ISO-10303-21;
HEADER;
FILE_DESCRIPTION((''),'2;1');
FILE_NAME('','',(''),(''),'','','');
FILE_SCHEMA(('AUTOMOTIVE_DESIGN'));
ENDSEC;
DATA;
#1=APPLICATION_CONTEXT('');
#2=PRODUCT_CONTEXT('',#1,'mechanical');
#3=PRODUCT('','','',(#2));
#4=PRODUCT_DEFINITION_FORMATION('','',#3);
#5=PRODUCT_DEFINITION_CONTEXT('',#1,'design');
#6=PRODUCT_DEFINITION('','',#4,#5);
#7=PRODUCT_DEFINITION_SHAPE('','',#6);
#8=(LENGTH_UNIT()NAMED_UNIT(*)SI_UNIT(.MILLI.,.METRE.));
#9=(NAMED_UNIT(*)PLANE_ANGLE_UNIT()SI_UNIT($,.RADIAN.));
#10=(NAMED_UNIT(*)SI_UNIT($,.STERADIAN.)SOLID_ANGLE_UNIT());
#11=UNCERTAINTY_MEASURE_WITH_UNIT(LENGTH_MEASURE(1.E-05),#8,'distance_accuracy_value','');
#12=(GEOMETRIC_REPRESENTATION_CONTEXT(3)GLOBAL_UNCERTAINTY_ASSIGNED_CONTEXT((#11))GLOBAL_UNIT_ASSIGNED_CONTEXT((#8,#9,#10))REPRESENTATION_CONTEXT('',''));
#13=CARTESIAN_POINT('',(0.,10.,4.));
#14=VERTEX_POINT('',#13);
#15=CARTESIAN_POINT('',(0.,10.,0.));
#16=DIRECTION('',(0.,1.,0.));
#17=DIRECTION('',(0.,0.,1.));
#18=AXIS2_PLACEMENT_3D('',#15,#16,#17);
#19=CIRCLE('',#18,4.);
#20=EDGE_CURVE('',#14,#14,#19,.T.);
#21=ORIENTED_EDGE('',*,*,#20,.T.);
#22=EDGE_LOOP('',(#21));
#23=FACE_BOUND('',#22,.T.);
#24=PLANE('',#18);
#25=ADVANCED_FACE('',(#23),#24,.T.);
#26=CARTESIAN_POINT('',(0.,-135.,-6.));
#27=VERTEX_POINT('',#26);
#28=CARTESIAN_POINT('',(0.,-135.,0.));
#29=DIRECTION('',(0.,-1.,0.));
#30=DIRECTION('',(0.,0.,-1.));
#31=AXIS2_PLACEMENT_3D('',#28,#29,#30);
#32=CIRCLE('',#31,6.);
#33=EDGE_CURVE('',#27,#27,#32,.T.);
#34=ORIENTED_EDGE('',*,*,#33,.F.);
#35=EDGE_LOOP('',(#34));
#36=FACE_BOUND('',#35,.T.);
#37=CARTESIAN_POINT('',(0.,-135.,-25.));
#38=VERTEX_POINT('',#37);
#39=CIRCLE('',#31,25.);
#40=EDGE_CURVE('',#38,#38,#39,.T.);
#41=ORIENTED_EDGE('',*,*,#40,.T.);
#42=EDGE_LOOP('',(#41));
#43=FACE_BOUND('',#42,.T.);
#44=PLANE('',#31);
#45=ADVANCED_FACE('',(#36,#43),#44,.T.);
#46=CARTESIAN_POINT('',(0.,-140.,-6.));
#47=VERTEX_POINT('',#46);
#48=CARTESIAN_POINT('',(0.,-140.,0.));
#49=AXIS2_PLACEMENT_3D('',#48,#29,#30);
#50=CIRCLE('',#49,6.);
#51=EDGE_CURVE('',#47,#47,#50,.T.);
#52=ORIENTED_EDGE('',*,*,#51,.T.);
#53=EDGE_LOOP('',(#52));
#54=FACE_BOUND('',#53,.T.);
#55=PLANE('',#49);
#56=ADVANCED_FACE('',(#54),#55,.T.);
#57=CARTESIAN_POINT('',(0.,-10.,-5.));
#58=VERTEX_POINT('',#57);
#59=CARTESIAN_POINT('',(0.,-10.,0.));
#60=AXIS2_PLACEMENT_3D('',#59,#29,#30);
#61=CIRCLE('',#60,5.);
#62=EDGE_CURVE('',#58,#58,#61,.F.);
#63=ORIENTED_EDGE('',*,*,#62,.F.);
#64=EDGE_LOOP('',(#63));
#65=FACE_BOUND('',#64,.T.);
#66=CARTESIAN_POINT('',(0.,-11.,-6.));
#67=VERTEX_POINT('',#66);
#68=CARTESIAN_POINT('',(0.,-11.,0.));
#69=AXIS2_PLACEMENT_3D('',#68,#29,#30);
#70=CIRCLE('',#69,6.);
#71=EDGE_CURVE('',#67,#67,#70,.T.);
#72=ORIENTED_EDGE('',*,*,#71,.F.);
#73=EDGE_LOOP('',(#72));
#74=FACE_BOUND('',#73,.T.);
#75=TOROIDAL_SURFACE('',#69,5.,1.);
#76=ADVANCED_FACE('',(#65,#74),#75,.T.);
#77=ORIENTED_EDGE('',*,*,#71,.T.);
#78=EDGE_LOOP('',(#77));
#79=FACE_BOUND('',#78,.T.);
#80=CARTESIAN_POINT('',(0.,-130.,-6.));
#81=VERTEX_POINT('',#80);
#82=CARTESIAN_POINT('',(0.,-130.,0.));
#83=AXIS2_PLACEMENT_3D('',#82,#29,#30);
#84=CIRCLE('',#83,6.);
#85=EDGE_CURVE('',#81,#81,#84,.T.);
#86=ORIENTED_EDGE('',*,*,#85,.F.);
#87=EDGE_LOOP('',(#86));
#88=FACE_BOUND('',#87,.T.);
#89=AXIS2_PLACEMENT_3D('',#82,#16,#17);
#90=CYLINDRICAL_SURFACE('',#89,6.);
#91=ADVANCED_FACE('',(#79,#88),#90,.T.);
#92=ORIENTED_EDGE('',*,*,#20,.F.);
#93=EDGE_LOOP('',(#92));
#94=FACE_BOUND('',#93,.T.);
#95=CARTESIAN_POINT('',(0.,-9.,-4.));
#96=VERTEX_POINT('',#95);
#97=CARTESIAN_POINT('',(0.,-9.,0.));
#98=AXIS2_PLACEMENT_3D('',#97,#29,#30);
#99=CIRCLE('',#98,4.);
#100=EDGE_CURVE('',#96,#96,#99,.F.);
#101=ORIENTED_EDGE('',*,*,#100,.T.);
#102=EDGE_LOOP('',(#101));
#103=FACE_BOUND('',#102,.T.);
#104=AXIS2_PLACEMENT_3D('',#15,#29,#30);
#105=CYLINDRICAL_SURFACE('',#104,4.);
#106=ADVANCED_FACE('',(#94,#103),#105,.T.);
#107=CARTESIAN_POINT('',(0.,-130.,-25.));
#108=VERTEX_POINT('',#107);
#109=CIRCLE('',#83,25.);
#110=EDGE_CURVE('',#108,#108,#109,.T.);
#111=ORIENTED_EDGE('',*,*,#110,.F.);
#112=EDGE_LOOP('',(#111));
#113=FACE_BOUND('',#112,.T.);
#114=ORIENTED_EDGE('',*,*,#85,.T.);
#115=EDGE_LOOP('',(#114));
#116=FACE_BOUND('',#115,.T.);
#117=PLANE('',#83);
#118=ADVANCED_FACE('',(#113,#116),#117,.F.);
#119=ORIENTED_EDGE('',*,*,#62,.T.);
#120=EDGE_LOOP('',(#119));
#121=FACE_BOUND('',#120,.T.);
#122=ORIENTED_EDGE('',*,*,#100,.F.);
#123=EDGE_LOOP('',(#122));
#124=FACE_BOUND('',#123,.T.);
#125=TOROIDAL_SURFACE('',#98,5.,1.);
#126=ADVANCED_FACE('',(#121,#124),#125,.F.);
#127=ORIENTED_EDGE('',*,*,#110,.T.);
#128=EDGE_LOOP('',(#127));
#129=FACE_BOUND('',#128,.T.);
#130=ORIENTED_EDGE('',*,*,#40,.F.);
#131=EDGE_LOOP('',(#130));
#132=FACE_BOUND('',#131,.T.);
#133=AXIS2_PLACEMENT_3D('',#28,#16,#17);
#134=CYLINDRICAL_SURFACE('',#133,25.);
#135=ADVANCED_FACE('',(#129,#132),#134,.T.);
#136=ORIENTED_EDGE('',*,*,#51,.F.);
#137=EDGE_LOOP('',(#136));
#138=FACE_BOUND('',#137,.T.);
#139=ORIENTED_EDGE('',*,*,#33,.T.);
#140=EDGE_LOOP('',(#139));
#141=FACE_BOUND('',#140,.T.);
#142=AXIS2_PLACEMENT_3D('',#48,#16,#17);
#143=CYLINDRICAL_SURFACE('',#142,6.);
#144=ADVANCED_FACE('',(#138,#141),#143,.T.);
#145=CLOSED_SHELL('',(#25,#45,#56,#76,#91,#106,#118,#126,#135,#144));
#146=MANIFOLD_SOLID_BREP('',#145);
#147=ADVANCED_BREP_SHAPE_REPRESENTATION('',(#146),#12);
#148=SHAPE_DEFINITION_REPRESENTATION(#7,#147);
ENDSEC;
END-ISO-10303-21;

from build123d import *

# Parameters (mm, degrees)
SKETCH1_R           = 4
BOSS_EXTRUDE1_DEPTH = 10
SKETCH2_R           = 6
BOSS_EXTRUDE2_DEPTH = 120
SKETCH3_R           = 25
BOSS_EXTRUDE3_DEPTH = 5
SKETCH4_R           = 6
BOSS_EXTRUDE4_DEPTH = 5
FILLET2_R           = 1


with BuildPart() as part:
    # Sketch1 → Boss-Extrude1 (new, symmetric)
    with BuildSketch(Plane(origin=(0, 0, 0), x_dir=(1, 0, 0), z_dir=(0, 1, 0))):
        with Locations(Location((0, 0, 0), (0, 0, 270))):
            Circle(SKETCH1_R)
    extrude(amount=BOSS_EXTRUDE1_DEPTH, both=True)

    # Sketch2 → Boss-Extrude2 (add)
    with BuildSketch(Plane.XZ.offset(10)):
        with Locations(Location((0, 0, 0), (0, 0, 270))):
            Circle(SKETCH2_R)
    extrude(amount=BOSS_EXTRUDE2_DEPTH)

    # Sketch3 → Boss-Extrude3 (add)
    with BuildSketch(Plane.XZ.offset(130)):
        with Locations(Location((0, 0, 0), (0, 0, 270))):
            Circle(SKETCH3_R)
    extrude(amount=BOSS_EXTRUDE3_DEPTH)

    # Sketch4 → Boss-Extrude4 (add)
    with BuildSketch(Plane.XZ.offset(135)):
        with Locations(Location((0, 0, 0), (0, 0, 270))):
            Circle(SKETCH4_R)
    extrude(amount=BOSS_EXTRUDE4_DEPTH)

    # Fillet2
    fillet2_edges = [part.edges().sort_by_distance(p)[0] for p in [
        (0, -10, -4),
        (0, -10, 6),
    ]]
    fillet(fillet2_edges, radius=FILLET2_R - 0.0001)  # a hair under: the kernel refuses the full size


solid = part.part
